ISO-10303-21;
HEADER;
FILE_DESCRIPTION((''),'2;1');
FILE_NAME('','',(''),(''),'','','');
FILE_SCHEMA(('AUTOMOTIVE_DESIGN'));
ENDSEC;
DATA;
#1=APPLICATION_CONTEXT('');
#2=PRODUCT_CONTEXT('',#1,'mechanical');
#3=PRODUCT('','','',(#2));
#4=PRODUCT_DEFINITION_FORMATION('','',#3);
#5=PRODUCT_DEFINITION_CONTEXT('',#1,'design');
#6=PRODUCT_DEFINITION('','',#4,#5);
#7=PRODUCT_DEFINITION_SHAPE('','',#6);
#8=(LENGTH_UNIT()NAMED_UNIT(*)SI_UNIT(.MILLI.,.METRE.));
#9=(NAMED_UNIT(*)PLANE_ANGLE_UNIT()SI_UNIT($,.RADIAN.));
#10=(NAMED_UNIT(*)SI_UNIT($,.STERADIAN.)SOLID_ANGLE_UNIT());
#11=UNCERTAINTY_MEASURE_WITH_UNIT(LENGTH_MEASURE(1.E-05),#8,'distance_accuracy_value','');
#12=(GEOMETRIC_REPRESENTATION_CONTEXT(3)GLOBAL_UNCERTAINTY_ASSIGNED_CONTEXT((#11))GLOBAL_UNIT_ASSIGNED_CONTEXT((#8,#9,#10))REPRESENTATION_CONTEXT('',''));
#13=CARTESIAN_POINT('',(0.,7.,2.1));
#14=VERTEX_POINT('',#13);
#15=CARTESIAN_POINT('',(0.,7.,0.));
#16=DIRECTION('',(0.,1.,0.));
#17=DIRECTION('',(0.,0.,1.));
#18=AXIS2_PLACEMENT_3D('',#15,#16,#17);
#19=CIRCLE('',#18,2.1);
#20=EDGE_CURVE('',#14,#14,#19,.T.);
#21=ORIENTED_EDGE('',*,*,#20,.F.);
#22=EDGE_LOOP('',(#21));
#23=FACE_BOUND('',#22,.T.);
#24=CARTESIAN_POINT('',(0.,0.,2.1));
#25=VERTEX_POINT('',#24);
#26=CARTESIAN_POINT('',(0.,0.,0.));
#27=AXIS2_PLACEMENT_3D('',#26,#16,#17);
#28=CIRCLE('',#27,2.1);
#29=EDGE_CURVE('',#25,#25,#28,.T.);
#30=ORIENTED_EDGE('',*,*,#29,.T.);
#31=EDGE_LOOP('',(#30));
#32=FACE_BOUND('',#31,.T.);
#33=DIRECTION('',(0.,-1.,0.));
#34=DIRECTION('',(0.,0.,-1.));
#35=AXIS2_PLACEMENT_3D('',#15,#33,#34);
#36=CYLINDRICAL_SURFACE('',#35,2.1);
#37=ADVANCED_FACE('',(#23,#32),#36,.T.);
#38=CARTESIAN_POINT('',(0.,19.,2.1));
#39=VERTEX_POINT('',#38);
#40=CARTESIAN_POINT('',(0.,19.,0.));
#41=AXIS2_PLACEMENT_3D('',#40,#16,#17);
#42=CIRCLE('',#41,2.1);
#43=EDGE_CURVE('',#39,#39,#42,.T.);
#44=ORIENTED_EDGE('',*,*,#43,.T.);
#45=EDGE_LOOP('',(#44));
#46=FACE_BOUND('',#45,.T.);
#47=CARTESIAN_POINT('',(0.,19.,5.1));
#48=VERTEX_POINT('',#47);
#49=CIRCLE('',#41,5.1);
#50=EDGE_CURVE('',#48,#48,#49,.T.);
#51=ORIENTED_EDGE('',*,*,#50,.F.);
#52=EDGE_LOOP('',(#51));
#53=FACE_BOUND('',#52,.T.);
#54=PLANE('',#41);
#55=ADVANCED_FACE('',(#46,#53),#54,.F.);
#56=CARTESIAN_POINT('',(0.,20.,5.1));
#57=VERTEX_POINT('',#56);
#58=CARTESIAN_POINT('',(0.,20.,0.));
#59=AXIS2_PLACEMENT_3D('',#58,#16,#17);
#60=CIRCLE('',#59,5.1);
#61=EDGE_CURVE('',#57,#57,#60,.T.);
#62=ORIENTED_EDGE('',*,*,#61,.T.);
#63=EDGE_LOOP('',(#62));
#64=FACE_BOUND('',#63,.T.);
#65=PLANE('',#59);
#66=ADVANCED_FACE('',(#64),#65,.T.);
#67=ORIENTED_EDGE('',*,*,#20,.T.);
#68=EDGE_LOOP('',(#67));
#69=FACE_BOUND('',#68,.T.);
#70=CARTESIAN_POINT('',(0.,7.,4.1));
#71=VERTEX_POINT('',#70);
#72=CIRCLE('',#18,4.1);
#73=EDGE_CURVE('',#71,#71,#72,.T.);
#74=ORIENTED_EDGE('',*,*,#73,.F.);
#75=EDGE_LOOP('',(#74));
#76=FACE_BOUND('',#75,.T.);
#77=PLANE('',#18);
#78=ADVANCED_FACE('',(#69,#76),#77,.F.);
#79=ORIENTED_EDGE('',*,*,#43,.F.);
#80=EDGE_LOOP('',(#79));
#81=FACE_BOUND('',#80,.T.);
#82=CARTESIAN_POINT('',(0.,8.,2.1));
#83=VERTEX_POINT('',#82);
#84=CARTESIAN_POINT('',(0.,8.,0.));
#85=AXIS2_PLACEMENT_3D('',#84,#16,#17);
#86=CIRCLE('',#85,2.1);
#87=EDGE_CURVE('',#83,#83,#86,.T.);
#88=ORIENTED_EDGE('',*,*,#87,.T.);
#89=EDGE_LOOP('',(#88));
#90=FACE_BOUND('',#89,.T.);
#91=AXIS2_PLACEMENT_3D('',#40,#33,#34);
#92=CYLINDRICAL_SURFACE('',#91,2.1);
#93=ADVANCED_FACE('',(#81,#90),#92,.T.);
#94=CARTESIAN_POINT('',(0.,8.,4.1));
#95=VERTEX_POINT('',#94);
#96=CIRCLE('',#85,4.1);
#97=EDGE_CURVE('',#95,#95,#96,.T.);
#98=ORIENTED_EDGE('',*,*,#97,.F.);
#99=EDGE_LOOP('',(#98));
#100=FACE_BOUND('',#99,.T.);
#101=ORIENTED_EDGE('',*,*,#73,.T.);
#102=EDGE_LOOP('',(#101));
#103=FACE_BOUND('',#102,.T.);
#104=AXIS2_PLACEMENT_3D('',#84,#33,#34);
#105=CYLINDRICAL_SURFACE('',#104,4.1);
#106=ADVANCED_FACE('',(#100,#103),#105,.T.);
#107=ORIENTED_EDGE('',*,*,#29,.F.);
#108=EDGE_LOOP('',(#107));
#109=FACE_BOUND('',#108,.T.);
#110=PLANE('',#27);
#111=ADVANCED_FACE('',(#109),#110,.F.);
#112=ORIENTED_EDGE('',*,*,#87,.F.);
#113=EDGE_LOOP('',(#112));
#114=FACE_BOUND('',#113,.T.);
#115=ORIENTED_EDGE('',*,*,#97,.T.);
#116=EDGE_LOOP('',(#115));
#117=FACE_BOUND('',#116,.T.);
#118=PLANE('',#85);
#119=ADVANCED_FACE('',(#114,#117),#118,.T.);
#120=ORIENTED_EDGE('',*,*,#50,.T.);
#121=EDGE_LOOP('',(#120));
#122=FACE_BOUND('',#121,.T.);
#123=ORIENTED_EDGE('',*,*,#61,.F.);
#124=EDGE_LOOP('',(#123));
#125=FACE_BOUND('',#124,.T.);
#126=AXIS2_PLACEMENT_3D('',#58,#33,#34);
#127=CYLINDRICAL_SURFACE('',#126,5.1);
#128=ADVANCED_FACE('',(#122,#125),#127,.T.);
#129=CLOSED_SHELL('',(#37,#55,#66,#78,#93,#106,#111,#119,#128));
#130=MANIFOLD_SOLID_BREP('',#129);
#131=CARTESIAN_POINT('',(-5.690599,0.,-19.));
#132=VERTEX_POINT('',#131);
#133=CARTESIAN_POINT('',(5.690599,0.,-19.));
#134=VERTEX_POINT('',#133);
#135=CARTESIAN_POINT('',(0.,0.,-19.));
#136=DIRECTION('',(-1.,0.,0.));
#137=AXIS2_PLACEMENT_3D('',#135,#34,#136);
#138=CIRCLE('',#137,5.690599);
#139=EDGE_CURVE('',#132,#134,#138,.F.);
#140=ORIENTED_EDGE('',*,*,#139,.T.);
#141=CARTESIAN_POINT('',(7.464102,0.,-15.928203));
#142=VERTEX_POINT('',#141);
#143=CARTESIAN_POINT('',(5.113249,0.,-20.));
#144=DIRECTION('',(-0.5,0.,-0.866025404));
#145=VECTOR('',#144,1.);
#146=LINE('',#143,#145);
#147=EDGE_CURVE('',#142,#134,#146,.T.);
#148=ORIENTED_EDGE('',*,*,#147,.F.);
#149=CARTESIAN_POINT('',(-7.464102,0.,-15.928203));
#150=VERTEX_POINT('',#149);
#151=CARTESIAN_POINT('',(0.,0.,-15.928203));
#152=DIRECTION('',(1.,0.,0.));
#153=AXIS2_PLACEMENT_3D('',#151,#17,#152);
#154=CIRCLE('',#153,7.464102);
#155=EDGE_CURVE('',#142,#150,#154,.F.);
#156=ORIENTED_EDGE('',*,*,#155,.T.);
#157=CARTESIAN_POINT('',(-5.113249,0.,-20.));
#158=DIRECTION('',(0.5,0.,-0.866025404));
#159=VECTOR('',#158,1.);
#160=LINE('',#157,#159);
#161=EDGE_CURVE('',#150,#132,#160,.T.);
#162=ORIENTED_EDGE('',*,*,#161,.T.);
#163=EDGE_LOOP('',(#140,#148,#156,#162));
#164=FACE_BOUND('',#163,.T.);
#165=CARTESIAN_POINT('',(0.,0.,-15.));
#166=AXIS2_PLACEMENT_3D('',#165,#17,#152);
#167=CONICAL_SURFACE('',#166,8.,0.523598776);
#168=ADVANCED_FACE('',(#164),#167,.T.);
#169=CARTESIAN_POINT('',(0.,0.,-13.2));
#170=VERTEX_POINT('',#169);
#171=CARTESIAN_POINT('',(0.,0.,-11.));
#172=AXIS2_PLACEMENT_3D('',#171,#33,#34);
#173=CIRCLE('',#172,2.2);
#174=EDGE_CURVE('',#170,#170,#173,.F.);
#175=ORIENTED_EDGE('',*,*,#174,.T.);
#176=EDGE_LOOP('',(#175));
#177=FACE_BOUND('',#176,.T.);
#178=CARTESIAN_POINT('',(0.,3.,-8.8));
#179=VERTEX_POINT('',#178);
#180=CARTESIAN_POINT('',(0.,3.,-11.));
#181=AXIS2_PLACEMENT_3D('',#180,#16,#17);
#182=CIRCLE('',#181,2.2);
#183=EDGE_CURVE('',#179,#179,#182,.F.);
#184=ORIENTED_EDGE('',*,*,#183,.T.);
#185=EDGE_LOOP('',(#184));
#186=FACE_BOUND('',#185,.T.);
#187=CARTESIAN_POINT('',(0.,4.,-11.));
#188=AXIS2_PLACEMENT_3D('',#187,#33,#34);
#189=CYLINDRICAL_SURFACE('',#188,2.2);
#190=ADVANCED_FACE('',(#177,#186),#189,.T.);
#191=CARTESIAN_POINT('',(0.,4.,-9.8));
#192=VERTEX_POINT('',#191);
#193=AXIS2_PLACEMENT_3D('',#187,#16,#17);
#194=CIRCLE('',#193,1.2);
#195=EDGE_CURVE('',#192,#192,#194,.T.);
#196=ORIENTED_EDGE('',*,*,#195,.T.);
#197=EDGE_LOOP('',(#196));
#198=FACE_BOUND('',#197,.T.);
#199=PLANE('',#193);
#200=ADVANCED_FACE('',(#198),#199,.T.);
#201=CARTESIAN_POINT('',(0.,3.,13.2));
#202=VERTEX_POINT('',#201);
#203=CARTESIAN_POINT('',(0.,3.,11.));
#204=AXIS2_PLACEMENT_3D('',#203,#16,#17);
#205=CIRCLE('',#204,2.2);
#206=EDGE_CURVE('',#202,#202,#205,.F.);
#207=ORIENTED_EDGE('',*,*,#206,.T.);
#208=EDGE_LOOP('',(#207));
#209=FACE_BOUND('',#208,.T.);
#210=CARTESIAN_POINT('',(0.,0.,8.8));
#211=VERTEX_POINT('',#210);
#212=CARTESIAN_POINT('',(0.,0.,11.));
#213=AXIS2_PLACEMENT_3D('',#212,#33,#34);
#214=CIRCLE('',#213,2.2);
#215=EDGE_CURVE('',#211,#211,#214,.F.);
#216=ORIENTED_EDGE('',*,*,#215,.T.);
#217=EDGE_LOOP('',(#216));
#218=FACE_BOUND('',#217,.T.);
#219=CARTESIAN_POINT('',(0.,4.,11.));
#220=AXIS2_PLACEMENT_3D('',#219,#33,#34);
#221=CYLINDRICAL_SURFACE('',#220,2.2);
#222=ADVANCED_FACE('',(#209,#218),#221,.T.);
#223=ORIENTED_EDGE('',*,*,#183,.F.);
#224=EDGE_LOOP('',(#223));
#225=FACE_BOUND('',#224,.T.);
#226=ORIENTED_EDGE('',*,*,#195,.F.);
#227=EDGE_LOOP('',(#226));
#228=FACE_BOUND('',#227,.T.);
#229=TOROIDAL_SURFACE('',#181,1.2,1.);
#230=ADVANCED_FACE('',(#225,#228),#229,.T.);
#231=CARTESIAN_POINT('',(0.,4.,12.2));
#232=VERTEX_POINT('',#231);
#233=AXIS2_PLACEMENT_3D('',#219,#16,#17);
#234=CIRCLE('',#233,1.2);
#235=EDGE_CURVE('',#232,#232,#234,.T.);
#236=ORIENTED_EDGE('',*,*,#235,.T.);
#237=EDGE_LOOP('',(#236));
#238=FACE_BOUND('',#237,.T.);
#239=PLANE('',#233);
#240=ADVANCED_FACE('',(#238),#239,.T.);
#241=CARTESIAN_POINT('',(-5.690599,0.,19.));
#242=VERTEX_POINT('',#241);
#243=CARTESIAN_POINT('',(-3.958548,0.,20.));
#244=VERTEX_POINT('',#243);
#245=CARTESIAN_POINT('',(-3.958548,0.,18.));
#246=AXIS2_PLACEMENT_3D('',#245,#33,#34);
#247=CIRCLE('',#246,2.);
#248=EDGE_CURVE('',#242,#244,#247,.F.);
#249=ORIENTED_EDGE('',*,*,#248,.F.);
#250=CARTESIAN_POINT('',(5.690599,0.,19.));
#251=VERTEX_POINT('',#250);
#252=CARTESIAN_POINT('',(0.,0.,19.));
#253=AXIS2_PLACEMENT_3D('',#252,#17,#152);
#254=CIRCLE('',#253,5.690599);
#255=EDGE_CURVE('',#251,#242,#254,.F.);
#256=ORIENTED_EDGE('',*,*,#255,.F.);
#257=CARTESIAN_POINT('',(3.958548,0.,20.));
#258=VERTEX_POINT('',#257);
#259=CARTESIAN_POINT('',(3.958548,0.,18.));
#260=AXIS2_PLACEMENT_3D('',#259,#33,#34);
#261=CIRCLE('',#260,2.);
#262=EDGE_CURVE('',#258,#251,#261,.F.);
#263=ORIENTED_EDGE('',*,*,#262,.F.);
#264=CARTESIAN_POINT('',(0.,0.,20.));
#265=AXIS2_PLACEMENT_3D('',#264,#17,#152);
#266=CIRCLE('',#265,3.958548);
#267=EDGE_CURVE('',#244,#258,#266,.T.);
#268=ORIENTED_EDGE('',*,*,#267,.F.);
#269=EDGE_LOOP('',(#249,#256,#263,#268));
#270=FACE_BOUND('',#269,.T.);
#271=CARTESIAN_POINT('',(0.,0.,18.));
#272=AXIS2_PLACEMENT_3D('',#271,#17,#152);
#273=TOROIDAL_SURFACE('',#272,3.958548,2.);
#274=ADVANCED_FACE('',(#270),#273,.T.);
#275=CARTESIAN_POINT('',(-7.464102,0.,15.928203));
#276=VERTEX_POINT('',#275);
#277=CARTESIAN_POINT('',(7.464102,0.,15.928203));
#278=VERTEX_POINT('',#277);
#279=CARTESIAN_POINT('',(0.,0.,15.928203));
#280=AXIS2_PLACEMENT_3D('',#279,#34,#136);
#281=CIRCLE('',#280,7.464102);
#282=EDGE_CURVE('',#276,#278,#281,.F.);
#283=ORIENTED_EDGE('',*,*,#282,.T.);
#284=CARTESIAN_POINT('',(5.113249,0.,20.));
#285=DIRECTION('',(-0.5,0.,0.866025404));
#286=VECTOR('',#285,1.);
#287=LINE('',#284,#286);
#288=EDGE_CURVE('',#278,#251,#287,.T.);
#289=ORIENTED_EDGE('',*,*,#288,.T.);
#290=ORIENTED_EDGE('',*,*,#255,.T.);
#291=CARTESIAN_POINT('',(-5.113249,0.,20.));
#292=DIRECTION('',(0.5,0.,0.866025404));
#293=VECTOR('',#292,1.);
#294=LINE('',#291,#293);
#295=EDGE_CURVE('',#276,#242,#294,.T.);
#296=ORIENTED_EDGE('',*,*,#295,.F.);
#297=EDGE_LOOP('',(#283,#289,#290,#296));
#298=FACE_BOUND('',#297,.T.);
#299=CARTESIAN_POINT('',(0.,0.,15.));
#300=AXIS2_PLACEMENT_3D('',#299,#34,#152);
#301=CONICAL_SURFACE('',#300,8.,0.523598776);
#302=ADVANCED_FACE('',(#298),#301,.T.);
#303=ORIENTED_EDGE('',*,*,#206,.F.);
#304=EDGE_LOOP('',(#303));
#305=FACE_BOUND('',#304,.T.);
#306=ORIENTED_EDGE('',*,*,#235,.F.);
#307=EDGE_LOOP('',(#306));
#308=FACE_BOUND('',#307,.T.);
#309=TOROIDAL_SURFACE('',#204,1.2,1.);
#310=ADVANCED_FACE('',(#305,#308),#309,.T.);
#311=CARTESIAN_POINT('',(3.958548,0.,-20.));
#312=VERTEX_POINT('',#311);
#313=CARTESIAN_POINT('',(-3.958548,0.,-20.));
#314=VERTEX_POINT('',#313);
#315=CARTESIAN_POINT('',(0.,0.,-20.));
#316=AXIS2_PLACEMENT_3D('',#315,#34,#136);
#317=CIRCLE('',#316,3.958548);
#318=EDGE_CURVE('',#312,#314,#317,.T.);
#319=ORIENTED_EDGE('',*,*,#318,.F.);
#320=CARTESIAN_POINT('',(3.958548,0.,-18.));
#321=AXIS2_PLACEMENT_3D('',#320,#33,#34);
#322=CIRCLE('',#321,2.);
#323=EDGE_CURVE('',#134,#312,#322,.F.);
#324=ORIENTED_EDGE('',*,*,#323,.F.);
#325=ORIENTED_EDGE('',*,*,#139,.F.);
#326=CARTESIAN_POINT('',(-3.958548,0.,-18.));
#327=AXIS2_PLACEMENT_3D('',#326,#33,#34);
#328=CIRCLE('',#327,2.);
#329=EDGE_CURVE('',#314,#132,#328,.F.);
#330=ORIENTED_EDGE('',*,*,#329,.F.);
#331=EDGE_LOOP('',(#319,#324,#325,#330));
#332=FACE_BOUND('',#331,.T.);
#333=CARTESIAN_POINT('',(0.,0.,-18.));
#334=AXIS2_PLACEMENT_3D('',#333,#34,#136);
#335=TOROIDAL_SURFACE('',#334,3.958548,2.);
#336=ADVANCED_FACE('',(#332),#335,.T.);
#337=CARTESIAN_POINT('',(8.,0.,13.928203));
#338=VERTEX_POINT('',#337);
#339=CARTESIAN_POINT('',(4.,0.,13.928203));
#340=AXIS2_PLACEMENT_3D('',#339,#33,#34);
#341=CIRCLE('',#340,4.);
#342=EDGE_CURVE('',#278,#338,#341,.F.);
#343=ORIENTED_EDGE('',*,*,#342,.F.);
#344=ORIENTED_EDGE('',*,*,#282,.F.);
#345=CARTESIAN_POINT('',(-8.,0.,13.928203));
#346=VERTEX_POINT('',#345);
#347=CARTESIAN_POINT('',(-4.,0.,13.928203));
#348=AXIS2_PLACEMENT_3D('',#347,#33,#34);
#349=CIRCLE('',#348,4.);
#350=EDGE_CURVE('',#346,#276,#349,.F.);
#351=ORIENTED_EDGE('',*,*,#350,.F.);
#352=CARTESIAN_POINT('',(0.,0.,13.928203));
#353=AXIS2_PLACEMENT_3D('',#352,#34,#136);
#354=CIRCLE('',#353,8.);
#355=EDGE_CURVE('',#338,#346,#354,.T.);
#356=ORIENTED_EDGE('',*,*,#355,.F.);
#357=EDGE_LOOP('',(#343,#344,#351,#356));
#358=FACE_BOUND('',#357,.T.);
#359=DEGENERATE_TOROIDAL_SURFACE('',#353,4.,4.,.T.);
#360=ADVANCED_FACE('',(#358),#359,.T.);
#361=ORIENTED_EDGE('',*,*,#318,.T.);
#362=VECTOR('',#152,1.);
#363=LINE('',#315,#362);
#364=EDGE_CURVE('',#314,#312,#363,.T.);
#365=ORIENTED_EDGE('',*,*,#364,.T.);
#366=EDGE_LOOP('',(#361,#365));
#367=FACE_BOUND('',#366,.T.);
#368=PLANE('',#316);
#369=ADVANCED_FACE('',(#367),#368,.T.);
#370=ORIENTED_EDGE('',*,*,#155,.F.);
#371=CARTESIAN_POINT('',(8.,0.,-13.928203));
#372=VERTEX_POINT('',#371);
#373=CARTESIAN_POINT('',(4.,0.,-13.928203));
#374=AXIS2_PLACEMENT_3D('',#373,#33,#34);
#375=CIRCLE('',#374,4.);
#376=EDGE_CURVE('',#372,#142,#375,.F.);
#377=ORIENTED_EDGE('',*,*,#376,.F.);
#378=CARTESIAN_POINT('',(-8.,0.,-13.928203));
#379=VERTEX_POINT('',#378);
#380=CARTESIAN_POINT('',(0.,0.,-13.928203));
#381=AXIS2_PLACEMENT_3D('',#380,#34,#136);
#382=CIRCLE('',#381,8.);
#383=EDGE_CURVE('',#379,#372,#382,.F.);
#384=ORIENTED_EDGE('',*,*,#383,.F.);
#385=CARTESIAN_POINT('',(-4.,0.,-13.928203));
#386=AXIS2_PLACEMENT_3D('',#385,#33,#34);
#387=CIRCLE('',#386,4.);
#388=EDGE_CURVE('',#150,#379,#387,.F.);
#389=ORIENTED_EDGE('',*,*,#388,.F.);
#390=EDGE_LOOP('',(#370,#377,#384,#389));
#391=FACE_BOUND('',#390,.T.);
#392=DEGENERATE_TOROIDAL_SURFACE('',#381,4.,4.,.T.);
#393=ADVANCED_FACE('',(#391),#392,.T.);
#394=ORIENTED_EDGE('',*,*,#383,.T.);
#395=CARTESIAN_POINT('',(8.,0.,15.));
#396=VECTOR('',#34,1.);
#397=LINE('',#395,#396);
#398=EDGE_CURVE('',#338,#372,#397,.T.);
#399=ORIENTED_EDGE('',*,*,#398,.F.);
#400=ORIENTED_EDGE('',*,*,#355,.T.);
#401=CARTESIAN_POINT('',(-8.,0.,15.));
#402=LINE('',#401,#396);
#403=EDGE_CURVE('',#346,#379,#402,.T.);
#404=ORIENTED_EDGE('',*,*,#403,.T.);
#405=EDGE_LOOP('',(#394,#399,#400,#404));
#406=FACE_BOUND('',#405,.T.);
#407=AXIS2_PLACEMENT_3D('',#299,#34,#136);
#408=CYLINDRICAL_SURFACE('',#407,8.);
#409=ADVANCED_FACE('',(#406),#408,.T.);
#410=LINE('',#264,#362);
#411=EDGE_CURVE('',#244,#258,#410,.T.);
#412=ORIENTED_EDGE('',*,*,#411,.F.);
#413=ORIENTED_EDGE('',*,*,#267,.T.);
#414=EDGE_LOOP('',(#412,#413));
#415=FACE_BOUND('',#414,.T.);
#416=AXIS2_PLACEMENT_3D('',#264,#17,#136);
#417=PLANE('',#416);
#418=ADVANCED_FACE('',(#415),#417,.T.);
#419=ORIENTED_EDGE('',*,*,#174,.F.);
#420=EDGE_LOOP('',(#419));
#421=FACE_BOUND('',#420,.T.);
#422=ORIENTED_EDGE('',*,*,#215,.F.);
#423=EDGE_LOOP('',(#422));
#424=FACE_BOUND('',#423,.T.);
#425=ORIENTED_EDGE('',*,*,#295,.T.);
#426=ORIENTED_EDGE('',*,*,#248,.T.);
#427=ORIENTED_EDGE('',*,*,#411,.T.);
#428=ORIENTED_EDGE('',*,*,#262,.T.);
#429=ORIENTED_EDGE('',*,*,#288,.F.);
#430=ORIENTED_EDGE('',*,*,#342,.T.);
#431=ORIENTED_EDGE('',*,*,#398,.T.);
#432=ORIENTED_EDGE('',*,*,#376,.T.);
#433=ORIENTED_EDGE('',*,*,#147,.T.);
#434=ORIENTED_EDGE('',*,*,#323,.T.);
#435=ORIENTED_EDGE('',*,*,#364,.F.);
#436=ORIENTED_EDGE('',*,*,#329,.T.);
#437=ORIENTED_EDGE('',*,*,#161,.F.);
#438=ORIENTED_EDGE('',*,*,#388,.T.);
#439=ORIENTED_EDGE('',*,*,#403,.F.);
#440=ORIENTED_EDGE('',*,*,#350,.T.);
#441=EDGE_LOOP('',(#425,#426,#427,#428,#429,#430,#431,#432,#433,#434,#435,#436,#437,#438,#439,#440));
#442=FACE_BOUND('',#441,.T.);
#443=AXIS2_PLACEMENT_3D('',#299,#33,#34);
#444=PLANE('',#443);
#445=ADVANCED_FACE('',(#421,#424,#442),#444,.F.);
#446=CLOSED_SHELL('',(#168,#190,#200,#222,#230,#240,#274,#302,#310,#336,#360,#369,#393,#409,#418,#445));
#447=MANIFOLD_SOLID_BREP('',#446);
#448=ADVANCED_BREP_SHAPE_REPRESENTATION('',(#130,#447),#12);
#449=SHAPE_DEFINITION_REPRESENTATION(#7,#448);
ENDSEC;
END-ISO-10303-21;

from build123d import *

# Parameters (mm, degrees)
SKETCH1_R            = 2.1
BOSS_EXTRUDE1_DEPTH  = 7
SKETCH2_R            = 4.1
BOSS_EXTRUDE2_DEPTH  = 1
SKETCH3_R            = 2.1
BOSS_EXTRUDE3_DEPTH  = 11
SKETCH4_R            = 5.1
BOSS_EXTRUDE4_DEPTH  = 1
BOSS_EXTRUDE5_DEPTH  = 15
REVOLVE1_ANGLE       = 180
FILLET1_R            = 4
FILLET2_R            = 2
FILLET1_OF_MIRROR1_R = 4
FILLET2_OF_MIRROR1_R = 2
SKETCH8_R            = 2.2
BOSS_EXTRUDE6_DEPTH  = 4
FILLET3_R            = 1


# Read off the part's stored shape, not the designer's step: Revolve1
with BuildPart() as part:
    # Sketch1 → Boss-Extrude1 (new body)
    with BuildSketch(Plane(origin=(0, 0, 0), x_dir=(1, 0, 0), z_dir=(0, 1, 0))):
        with Locations(Location((0, 0, 0), (0, 0, 270))):
            Circle(SKETCH1_R)
    extrude(amount=BOSS_EXTRUDE1_DEPTH)

    # Sketch2 → Boss-Extrude2 (add)
    with BuildSketch(Plane(origin=(0, 7, 0), x_dir=(1, 0, 0), z_dir=(0, 1, 0))):
        with Locations(Location((0, 0, 0), (0, 0, 270))):
            Circle(SKETCH2_R)
    extrude(amount=BOSS_EXTRUDE2_DEPTH)

    # Sketch3 → Boss-Extrude3 (add)
    with BuildSketch(Plane(origin=(0, 8, 0), x_dir=(1, 0, 0), z_dir=(0, 1, 0))):
        with Locations(Location((0, 0, 0), (0, 0, 270))):
            Circle(SKETCH3_R)
    extrude(amount=BOSS_EXTRUDE3_DEPTH)

    # Sketch4 → Boss-Extrude4 (add)
    with BuildSketch(Plane(origin=(0, 19, 0), x_dir=(1, 0, 0), z_dir=(0, 1, 0))):
        with Locations(Location((0, 0, 0), (0, 0, 270))):
            Circle(SKETCH4_R)
    extrude(amount=BOSS_EXTRUDE4_DEPTH)


with BuildPart() as body_2:
    # Sketch5 → Boss-Extrude5 (new, symmetric)
    with BuildSketch(Plane.XY):
        with BuildLine():
            Line((0, 0), (-8, 0))
            ThreePointArc((-8, 0), (0, -8), (8, 0))
            Line((8, 0), (0, 0))
        make_face()
    extrude(amount=BOSS_EXTRUDE5_DEPTH, both=True)

    # Revolve1 outline → Revolve1 (revolve)
    with BuildSketch(Plane(origin=(0, 0, 0), x_dir=(-1, 0, 0), z_dir=(0, 1, 0))):
        Polygon((0, -15), (0, -20), (5.113248654, -20), (8, -15), align=None)
    revolve1 = revolve(axis=Axis((0, 0, 0), (0, 0, 1)), revolution_arc=REVOLVE1_ANGLE)

    # Fillet1
    fillet1_edges = [body_2.edges().sort_by_distance(p)[0] for p in [
        (0, -8, -15),
    ]]
    fillet(fillet1_edges, radius=FILLET1_R)

    # Fillet2
    fillet2_edges = [body_2.edges().sort_by_distance(p)[0] for p in [
        (0, -5.113248654, -20),
    ]]
    fillet(fillet2_edges, radius=FILLET2_R)

    # Mirror1: Revolve1 across plane
    add(revolve1.mirror(Plane.XY))

    # Fillet1 of Mirror1
    fillet1_of_mirror1_edges = [body_2.edges().sort_by_distance(p)[0] for p in [
        (0, -8, 15),
    ]]
    fillet(fillet1_of_mirror1_edges, radius=FILLET1_OF_MIRROR1_R)

    # Fillet2 of Mirror1
    fillet2_of_mirror1_edges = [body_2.edges().sort_by_distance(p)[0] for p in [
        (0, -5.113248654, 20),
    ]]
    fillet(fillet2_of_mirror1_edges, radius=FILLET2_OF_MIRROR1_R)

    # Sketch8 → Boss-Extrude6 (add)
    with BuildSketch(Plane(origin=(0, 0, 0), x_dir=(1, 0, 0), z_dir=(0, 1, 0))):
        with Locations(Location((0, -11, 0), (0, 0, 90))):
            Circle(SKETCH8_R)
        with Locations(Location((0, 11, 0), (0, 0, 90))):
            Circle(SKETCH8_R)
    extrude(amount=BOSS_EXTRUDE6_DEPTH)

    # Fillet3
    fillet3_edges = [body_2.edges().sort_by_distance(p)[0] for p in [
        (0, 4, 13.2),
        (0, 4, -8.8),
    ]]
    fillet(fillet3_edges, radius=FILLET3_R)


solid = Compound([part.part, body_2.part])
